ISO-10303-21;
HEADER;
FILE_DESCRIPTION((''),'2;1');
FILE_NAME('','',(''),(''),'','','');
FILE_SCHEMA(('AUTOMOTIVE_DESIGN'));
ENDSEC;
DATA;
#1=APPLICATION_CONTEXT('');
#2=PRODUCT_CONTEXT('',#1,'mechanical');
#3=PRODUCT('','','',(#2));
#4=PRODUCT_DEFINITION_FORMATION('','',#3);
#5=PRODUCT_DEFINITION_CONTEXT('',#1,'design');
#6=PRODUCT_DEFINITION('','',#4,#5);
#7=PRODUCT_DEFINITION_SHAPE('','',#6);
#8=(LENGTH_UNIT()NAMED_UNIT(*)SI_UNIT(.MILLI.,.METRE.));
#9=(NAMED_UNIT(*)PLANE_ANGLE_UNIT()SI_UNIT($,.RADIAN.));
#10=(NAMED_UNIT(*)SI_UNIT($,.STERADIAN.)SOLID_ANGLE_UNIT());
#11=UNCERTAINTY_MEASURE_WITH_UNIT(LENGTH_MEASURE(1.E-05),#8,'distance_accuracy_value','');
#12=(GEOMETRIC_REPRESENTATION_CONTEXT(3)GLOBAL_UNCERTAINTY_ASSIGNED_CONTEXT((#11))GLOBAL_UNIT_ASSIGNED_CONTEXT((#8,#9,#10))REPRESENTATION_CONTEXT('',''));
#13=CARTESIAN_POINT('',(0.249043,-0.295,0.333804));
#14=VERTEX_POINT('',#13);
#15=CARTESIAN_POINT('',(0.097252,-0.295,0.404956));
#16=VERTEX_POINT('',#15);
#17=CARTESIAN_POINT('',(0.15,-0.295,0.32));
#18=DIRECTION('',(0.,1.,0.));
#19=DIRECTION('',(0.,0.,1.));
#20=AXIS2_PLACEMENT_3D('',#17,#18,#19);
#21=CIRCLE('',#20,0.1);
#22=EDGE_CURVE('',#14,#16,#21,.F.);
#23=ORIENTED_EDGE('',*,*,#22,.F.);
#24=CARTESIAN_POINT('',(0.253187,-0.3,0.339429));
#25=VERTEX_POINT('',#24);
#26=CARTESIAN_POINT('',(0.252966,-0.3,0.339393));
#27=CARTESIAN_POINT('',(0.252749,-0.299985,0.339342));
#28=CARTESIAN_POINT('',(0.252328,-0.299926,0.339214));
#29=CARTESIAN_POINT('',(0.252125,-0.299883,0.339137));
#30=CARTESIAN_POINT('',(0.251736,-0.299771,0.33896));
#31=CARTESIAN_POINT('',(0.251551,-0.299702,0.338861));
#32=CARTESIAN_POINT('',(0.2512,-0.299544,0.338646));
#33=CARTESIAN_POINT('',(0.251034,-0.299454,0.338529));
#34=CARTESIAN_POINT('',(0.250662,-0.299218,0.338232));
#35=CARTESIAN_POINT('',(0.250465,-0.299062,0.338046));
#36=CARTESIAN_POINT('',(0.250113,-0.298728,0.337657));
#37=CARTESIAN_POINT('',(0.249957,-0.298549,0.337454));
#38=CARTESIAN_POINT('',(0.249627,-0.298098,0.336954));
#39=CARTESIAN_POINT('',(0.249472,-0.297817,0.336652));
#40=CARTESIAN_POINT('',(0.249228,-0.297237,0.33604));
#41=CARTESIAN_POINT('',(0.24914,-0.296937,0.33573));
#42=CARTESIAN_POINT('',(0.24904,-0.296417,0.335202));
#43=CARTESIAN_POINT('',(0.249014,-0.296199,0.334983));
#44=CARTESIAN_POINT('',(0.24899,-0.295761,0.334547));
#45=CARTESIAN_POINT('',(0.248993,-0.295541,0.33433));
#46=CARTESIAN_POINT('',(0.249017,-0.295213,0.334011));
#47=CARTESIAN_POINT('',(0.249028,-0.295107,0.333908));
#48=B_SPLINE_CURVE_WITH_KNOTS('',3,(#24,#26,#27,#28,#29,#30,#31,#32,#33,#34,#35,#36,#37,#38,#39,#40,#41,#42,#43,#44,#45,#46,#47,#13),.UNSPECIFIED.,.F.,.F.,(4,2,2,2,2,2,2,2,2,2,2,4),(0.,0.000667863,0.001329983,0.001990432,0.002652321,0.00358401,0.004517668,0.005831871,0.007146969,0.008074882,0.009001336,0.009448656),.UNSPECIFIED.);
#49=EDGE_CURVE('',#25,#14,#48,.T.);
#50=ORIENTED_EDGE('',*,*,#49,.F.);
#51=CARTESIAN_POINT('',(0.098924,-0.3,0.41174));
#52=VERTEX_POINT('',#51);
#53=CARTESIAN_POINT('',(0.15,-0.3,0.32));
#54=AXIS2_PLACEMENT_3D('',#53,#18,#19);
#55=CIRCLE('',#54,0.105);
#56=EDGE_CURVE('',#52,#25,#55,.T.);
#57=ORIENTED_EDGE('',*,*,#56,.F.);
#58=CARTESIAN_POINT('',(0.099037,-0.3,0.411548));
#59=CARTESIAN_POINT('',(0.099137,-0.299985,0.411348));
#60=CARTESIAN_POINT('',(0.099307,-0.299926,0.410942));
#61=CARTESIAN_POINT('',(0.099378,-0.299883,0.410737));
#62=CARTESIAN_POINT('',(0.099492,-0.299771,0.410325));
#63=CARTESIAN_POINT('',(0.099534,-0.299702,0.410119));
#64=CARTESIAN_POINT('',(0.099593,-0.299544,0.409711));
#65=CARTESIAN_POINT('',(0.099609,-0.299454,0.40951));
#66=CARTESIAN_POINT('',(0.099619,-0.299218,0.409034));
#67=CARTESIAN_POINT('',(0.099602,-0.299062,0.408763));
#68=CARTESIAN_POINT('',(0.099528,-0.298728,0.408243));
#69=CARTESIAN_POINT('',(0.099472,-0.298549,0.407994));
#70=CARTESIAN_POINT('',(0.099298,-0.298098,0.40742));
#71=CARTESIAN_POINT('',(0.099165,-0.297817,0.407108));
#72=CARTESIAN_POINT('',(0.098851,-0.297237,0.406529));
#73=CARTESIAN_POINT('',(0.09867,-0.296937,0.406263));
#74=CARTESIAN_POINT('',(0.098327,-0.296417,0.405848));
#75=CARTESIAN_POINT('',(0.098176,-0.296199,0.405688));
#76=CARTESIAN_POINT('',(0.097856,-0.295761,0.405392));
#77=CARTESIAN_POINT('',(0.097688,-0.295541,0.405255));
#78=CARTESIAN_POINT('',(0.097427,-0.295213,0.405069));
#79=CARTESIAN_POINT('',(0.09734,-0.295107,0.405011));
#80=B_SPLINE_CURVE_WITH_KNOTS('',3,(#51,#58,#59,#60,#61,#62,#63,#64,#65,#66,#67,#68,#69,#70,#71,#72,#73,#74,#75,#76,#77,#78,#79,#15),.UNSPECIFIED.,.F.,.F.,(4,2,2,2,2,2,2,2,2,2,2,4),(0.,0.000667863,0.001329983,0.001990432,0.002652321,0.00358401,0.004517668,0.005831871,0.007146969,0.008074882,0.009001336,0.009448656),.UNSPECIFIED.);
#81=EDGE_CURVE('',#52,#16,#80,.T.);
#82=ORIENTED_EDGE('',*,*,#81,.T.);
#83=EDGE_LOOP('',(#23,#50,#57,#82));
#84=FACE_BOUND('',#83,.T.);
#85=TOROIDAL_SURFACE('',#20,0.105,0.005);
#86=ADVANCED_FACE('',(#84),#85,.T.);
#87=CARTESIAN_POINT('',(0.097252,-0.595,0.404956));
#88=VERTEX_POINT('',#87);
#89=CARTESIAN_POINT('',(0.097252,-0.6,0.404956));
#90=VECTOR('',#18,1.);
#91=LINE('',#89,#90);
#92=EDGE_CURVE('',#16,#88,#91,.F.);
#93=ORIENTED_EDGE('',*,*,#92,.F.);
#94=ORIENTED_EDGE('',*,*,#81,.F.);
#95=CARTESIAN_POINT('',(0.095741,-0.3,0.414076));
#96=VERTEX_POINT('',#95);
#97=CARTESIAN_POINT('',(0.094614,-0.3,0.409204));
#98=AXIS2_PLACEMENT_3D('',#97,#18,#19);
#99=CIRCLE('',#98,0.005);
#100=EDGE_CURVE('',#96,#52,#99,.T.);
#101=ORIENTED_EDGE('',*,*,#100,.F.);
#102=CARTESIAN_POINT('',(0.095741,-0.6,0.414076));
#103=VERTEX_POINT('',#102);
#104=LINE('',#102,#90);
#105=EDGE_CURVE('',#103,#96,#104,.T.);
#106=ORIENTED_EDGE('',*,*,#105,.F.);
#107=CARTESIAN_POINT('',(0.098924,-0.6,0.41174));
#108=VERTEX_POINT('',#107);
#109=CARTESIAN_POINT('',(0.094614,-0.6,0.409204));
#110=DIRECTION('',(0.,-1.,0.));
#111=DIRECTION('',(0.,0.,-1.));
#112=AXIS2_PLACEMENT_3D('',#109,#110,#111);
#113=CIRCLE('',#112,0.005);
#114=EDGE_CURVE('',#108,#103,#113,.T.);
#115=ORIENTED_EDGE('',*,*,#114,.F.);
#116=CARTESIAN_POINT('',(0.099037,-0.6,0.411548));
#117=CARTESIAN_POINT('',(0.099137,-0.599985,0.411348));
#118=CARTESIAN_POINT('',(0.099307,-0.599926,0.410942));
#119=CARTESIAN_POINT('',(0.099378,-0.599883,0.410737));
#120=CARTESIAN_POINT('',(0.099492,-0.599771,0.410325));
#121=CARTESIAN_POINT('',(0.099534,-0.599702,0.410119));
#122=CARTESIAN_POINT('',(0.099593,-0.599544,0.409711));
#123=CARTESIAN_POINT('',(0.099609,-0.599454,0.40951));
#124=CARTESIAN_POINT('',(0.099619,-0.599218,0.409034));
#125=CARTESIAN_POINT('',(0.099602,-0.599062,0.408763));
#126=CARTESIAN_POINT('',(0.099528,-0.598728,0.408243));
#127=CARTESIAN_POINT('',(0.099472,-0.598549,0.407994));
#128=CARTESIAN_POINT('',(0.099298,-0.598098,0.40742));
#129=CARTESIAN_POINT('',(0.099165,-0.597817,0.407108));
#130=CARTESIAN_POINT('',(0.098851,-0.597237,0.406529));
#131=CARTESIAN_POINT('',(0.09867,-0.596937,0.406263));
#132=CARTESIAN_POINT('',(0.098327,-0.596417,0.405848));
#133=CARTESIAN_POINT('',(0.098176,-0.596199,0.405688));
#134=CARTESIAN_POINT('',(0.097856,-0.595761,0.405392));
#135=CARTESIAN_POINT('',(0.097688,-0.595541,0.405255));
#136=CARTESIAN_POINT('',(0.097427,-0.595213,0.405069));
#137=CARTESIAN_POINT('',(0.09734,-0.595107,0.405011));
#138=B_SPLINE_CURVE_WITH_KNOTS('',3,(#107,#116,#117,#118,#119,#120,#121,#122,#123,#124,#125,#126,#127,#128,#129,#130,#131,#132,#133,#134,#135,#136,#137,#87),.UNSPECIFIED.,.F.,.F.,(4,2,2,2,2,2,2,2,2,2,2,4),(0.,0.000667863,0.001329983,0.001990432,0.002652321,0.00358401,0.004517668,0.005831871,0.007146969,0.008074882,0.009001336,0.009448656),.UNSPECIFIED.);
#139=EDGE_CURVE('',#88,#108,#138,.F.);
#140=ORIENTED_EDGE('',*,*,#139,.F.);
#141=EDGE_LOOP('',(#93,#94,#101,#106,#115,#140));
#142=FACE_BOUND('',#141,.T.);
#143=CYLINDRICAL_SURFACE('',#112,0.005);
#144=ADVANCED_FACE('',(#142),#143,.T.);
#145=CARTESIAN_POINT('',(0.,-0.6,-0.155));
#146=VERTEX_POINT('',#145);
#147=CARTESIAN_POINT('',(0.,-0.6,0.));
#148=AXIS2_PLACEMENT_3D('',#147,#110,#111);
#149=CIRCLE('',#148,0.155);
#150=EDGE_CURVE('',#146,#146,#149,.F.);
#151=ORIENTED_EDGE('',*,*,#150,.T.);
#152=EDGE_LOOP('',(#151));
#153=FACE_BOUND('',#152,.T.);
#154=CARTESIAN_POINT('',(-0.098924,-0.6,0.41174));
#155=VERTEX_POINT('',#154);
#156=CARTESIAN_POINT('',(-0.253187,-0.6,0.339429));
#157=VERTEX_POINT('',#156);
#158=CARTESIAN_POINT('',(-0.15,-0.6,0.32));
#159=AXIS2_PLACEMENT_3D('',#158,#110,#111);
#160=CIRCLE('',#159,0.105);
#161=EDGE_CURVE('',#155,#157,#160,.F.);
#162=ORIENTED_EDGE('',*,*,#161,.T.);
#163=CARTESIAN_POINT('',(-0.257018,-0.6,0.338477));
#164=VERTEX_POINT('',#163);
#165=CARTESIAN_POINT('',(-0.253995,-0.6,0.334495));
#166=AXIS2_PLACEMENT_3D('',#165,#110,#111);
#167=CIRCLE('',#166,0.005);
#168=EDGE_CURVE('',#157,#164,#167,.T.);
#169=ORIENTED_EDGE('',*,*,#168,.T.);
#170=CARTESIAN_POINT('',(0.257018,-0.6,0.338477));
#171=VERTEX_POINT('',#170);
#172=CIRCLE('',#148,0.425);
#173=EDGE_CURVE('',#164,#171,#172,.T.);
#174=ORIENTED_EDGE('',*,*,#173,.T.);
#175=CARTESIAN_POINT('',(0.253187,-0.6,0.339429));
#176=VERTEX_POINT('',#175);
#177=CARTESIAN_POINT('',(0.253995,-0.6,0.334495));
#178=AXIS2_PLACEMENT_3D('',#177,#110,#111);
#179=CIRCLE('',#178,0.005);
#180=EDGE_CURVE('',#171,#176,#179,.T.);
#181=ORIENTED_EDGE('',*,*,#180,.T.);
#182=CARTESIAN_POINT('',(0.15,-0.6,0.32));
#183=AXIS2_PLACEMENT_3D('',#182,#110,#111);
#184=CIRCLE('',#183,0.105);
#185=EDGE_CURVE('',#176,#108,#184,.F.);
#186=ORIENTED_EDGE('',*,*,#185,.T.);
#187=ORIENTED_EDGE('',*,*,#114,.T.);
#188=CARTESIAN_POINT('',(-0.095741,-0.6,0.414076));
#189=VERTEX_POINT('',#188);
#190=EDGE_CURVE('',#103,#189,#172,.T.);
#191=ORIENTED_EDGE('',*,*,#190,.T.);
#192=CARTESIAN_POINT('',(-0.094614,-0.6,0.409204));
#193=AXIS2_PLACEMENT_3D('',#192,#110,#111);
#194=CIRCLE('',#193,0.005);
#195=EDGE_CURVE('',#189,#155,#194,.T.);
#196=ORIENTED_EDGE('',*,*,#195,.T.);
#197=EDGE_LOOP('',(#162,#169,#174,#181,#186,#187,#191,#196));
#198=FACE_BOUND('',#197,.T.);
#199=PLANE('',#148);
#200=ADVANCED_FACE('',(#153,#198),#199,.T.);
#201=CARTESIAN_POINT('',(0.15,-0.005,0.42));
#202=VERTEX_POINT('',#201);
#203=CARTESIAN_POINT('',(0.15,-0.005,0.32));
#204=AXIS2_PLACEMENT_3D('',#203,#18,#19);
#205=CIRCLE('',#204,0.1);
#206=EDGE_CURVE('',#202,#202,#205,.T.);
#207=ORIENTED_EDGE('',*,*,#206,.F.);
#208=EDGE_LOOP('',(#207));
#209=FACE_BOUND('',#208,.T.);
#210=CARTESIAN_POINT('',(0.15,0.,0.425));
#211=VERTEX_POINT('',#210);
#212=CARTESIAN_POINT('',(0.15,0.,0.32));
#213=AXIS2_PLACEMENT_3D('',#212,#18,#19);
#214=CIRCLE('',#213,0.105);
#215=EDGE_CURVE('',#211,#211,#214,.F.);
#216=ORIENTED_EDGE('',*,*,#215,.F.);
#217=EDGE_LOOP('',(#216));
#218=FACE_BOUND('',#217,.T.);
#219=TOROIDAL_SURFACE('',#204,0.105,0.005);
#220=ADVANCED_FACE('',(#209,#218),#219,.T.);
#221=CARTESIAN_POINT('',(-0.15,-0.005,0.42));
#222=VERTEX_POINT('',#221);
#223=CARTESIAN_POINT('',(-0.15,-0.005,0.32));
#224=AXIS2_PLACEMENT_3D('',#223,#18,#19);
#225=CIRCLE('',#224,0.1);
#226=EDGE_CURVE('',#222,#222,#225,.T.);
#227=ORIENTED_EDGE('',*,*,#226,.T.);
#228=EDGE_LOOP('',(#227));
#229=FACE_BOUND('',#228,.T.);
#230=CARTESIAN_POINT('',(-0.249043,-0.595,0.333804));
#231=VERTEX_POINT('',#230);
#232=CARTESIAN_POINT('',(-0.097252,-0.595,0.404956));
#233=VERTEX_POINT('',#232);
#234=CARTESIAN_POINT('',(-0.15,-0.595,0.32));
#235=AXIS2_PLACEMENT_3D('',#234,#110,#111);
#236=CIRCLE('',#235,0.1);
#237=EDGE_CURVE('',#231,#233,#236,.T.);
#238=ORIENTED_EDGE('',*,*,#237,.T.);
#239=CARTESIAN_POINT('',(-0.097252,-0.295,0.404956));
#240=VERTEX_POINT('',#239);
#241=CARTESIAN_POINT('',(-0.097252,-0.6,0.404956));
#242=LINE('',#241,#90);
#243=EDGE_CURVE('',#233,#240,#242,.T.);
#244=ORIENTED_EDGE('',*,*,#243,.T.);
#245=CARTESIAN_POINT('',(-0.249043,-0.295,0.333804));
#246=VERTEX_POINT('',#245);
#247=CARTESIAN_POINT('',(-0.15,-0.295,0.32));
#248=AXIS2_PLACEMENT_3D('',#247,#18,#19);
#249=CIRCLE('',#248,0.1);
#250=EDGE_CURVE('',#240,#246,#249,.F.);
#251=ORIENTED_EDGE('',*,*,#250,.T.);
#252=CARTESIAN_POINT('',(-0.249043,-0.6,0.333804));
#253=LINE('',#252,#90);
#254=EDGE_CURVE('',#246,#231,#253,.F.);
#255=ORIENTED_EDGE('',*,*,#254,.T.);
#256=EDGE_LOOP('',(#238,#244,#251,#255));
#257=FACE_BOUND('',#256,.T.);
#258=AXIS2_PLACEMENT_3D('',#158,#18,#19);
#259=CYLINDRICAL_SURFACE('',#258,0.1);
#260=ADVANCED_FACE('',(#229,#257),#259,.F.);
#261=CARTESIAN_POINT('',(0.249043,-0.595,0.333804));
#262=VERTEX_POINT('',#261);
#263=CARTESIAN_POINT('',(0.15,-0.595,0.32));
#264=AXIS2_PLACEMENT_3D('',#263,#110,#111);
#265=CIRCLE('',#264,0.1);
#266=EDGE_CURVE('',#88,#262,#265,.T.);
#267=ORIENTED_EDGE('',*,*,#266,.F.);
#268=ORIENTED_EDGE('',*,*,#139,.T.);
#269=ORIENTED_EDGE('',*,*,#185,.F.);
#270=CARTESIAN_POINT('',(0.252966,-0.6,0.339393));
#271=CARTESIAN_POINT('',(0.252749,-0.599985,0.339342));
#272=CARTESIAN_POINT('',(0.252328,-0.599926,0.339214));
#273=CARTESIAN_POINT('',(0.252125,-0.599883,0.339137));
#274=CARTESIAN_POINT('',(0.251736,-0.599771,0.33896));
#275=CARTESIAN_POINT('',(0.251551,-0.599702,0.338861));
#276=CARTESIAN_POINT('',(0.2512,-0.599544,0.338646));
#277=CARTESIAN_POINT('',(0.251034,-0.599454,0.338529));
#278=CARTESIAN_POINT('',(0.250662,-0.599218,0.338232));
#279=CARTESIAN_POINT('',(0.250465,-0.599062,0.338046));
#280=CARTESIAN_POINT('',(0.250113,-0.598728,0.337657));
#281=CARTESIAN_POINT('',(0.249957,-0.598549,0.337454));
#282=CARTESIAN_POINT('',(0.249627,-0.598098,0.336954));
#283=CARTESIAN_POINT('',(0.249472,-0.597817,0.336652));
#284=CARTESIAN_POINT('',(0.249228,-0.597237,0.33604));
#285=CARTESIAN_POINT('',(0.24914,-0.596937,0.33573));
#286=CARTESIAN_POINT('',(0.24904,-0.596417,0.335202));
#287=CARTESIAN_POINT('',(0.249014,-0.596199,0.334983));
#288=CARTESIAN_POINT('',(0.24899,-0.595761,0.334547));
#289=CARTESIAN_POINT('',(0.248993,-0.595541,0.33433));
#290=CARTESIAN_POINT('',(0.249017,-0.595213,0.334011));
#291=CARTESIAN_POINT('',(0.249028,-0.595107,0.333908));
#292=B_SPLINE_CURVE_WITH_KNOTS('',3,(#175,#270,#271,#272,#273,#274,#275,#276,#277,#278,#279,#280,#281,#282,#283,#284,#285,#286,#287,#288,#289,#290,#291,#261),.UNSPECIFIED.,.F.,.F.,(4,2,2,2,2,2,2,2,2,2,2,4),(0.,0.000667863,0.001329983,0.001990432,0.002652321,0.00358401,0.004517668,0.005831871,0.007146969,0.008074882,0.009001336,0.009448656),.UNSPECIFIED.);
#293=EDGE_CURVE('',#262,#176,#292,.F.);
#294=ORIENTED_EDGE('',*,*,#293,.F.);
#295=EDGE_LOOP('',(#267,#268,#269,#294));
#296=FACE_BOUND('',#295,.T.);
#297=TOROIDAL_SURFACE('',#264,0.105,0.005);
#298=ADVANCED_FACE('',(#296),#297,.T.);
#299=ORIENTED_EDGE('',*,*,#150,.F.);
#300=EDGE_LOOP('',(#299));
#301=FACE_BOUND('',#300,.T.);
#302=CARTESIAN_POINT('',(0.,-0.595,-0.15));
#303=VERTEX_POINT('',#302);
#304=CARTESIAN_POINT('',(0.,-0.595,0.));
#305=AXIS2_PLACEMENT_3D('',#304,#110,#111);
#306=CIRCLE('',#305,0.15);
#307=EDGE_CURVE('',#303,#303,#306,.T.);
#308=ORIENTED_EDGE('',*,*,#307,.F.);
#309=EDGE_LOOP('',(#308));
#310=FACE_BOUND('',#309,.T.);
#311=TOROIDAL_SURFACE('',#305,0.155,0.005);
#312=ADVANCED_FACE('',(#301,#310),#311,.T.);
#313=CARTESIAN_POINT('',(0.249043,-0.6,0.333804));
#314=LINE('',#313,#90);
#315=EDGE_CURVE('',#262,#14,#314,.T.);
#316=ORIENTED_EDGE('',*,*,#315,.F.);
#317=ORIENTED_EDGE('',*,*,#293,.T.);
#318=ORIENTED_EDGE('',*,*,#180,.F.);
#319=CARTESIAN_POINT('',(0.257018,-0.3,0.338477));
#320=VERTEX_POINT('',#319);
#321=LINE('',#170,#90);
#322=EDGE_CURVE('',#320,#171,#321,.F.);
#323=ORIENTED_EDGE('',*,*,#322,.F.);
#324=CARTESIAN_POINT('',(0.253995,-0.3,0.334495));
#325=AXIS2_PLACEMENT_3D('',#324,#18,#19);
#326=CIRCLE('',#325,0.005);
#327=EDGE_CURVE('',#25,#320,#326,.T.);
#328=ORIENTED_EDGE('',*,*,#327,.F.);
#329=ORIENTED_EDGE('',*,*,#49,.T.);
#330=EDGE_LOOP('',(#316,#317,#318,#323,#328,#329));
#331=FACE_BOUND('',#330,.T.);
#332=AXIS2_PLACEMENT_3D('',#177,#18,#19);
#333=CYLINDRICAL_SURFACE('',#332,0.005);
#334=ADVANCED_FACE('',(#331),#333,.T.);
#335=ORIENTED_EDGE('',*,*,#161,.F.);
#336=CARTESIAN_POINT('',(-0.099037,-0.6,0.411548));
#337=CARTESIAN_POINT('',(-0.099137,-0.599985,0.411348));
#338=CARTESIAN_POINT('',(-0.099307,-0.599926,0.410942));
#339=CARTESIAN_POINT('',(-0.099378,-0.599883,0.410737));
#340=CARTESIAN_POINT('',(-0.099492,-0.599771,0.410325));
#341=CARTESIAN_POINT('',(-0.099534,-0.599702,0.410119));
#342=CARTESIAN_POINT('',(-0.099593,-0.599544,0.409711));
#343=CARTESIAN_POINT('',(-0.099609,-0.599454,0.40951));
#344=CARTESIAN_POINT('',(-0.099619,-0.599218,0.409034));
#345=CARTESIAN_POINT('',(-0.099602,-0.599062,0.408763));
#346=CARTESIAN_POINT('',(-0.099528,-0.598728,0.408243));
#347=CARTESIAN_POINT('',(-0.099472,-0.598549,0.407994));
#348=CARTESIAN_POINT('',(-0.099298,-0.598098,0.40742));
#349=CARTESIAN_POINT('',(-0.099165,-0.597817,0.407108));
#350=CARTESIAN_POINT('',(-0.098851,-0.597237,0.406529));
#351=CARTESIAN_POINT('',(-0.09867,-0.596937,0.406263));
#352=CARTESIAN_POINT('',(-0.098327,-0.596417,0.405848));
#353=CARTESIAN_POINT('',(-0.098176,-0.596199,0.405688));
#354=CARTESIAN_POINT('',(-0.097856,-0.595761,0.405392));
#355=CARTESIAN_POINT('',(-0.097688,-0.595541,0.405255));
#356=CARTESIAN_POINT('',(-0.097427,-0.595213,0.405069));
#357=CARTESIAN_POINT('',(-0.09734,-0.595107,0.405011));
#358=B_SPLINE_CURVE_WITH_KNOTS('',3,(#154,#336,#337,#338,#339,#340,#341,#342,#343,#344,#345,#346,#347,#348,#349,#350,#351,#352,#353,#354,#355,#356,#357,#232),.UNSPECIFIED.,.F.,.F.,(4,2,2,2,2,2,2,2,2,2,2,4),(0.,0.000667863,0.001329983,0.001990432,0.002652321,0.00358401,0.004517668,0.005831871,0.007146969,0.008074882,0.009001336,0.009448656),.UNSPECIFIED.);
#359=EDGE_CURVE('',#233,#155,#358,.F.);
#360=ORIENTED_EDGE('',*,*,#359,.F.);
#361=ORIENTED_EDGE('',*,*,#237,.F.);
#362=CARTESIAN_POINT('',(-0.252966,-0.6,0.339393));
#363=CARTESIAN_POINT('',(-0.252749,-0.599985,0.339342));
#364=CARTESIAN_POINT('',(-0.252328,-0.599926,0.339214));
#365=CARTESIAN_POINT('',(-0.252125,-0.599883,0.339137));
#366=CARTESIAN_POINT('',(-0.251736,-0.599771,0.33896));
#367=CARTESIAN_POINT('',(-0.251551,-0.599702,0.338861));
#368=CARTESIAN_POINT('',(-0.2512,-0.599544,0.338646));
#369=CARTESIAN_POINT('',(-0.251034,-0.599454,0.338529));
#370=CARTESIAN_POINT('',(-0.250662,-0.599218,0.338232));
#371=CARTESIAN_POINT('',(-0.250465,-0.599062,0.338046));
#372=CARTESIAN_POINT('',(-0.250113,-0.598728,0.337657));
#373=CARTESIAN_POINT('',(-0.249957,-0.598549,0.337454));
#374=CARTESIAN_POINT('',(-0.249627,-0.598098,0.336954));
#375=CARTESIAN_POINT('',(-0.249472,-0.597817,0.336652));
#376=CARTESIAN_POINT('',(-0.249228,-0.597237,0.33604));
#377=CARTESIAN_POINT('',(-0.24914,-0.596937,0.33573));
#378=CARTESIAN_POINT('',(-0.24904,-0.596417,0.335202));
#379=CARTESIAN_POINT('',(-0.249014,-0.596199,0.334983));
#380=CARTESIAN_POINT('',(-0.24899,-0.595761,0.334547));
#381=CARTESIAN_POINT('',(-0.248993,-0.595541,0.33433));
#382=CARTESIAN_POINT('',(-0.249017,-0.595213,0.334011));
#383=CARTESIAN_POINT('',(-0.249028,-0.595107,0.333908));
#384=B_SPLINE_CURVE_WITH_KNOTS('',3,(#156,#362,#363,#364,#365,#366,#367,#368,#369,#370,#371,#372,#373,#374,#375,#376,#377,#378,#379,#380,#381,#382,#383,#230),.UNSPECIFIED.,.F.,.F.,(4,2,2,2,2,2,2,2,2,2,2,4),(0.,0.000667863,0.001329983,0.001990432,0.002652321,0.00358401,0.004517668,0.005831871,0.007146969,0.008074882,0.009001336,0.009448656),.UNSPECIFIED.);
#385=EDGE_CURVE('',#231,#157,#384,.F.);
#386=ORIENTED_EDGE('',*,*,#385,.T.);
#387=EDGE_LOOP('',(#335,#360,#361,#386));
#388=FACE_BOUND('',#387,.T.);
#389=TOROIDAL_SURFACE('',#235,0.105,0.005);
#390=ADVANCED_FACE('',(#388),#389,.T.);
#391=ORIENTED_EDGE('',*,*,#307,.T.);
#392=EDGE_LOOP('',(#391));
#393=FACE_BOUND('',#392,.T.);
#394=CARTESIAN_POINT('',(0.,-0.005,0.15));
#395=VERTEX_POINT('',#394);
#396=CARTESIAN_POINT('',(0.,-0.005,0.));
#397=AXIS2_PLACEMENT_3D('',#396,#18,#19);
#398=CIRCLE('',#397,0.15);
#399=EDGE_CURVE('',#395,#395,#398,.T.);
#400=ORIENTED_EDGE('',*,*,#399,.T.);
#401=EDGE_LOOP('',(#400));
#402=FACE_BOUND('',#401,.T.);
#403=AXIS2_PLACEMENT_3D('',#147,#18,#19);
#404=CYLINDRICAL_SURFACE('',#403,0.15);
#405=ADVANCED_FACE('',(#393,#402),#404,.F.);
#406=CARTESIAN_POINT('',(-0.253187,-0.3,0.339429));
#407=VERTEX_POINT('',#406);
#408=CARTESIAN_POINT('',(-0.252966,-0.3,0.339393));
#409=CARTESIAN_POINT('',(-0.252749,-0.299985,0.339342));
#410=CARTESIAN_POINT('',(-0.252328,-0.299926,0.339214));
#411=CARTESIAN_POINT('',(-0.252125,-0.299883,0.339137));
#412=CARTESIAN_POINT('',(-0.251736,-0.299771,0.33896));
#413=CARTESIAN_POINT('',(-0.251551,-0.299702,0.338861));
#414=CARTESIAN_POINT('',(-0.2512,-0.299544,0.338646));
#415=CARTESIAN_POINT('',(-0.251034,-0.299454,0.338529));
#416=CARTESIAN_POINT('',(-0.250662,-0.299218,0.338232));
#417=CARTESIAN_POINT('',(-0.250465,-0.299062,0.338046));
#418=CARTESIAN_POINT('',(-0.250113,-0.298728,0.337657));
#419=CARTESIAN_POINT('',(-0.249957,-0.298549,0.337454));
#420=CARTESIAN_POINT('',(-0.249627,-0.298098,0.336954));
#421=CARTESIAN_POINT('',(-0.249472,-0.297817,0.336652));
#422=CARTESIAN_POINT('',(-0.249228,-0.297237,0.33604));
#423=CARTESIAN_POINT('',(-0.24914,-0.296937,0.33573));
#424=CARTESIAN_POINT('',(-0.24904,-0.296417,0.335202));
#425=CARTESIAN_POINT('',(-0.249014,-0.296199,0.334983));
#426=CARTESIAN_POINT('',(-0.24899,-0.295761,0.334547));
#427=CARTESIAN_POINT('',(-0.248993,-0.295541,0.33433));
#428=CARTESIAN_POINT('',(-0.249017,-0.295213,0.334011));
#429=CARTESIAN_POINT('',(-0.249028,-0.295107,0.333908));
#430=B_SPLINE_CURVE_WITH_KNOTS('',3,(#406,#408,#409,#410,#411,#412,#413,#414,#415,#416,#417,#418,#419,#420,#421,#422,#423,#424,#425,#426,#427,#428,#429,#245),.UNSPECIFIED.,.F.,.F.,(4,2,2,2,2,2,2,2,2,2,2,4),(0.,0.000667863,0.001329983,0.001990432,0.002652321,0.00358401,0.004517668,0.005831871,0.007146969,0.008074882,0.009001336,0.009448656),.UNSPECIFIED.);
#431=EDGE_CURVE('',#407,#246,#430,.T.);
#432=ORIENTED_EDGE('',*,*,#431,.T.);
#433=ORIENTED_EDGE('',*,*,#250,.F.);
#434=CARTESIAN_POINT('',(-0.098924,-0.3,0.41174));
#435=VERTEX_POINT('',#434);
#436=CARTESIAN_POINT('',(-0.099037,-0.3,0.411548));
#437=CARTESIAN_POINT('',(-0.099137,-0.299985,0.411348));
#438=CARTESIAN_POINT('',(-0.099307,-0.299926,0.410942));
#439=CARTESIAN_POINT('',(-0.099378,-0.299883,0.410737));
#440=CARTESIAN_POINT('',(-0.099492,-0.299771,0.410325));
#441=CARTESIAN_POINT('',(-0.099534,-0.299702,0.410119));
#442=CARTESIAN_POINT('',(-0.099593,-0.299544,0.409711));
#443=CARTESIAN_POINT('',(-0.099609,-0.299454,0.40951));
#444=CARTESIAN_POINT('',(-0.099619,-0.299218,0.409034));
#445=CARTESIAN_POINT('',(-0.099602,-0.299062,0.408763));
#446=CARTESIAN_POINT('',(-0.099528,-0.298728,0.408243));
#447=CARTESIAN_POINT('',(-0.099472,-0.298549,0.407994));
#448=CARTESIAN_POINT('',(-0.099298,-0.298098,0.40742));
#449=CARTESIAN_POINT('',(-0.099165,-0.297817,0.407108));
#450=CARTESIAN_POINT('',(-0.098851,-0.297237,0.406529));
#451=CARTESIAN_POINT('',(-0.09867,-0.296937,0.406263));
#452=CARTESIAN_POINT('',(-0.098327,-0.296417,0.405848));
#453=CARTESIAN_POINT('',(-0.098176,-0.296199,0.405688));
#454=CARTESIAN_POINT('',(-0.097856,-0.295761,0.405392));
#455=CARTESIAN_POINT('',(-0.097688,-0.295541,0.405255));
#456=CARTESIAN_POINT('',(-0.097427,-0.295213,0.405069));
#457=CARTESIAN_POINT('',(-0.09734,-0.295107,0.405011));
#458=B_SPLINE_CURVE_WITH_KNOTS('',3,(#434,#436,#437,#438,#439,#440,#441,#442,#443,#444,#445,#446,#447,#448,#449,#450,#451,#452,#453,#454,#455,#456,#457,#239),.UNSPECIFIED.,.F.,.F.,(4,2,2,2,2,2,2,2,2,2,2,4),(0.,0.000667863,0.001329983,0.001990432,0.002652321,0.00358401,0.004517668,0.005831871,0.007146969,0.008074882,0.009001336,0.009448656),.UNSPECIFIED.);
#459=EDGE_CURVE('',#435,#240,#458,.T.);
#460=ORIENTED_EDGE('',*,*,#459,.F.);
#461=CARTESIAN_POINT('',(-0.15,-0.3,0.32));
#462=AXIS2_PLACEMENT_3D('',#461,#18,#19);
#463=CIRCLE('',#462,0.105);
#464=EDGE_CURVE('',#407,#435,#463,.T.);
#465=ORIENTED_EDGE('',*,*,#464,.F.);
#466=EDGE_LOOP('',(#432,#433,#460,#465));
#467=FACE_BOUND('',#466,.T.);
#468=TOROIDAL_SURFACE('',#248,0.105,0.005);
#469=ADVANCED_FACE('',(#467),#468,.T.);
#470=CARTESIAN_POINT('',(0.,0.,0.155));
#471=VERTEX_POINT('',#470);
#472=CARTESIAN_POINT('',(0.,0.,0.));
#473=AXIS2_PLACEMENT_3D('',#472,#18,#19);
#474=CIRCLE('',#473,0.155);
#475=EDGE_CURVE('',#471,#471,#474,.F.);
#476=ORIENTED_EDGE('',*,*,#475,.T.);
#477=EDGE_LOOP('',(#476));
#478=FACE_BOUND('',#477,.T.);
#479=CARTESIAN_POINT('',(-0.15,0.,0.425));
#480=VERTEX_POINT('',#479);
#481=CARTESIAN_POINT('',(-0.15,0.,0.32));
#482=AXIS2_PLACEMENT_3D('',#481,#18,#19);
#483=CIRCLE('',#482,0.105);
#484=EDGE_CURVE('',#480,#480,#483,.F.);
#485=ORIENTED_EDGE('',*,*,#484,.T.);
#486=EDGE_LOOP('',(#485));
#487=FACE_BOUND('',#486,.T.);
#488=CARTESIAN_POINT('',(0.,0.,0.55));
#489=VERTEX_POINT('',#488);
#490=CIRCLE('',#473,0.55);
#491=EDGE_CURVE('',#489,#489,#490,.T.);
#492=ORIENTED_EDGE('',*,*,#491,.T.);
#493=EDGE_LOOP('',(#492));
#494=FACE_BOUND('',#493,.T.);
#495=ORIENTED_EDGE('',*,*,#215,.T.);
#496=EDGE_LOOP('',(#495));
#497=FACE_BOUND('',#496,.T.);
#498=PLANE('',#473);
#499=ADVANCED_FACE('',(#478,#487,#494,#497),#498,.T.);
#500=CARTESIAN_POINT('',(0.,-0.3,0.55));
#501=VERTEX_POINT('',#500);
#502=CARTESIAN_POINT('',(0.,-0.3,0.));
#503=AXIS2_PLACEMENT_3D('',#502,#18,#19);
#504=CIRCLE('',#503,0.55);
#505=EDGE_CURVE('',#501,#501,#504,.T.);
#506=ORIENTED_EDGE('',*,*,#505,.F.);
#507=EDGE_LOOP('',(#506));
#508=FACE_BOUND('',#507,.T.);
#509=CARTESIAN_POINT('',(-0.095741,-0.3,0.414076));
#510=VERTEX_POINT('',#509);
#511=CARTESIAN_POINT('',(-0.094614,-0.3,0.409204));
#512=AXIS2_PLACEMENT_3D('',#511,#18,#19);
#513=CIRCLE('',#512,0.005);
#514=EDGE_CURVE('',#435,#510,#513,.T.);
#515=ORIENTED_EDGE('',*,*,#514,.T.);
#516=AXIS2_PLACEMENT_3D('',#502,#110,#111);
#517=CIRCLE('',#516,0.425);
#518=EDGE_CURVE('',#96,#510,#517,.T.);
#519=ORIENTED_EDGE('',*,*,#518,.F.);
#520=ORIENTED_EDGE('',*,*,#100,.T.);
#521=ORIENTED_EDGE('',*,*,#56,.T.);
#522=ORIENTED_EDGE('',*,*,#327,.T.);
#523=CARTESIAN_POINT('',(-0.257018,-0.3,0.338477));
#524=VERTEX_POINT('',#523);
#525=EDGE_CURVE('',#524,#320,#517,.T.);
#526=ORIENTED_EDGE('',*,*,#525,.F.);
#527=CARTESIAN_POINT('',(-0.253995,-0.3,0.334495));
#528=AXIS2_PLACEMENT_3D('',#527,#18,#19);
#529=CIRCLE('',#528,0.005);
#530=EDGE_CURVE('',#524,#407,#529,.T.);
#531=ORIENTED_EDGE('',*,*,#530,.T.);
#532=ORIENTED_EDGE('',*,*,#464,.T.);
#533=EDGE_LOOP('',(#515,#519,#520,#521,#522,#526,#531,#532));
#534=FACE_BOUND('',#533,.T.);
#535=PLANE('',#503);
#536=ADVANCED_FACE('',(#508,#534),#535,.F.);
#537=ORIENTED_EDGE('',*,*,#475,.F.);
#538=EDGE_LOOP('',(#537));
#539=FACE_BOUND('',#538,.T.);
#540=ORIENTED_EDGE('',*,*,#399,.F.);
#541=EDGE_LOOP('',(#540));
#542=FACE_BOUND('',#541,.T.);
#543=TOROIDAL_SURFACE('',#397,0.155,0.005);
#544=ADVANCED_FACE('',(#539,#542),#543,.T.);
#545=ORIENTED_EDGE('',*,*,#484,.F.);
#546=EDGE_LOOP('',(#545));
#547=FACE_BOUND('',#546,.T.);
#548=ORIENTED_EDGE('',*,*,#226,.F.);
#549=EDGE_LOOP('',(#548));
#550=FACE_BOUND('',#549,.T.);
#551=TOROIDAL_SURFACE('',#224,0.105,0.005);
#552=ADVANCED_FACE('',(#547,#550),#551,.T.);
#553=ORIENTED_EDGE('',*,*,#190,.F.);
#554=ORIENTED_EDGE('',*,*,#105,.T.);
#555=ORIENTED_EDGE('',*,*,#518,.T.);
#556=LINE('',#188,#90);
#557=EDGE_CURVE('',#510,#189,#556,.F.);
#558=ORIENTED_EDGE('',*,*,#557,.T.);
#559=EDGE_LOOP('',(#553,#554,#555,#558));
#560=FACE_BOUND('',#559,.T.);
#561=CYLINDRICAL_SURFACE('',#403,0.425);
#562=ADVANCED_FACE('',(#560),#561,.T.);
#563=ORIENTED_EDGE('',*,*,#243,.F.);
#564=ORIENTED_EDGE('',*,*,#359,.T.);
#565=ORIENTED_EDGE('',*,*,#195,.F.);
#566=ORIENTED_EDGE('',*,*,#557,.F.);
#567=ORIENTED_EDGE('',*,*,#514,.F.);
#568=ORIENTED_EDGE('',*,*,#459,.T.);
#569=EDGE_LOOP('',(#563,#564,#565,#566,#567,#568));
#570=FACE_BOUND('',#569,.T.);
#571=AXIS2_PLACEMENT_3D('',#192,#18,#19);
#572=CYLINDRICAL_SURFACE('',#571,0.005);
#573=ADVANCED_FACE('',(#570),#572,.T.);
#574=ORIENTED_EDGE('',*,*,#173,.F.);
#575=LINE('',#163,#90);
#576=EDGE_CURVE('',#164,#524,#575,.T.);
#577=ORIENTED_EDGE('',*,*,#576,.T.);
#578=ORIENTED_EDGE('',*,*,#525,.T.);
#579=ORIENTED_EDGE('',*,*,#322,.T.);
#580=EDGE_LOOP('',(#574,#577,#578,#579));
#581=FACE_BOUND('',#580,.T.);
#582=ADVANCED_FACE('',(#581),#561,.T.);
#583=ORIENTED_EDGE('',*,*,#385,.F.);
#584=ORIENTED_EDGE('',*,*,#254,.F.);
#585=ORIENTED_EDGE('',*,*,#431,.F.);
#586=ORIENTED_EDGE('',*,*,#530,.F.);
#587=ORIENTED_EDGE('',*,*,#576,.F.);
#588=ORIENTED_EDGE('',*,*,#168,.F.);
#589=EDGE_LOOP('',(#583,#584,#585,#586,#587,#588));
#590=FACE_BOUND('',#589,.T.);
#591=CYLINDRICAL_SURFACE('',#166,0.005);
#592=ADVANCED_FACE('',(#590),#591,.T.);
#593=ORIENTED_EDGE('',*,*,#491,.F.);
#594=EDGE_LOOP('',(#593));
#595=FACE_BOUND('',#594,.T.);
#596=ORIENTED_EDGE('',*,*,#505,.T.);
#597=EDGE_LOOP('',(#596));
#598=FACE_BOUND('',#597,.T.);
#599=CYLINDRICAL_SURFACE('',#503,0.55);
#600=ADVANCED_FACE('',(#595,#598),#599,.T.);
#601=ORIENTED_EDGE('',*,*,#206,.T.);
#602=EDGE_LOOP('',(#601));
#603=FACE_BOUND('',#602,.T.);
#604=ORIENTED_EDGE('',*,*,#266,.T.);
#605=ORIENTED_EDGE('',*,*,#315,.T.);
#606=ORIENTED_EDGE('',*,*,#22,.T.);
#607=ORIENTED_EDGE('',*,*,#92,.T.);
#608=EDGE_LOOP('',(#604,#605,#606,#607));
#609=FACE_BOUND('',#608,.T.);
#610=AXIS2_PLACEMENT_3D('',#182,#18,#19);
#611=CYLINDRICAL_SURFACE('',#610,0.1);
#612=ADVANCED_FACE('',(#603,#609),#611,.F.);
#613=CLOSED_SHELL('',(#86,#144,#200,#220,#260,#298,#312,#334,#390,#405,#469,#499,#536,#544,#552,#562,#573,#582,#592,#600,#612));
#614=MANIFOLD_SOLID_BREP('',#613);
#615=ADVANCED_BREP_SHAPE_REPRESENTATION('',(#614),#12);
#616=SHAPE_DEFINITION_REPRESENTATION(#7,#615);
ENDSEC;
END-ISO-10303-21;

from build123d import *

# Parameters (mm, degrees)
SKETCH1_R           = 0.55
BOSS_EXTRUDE1_DEPTH = 0.3
SKETCH2_R           = 0.425
BOSS_EXTRUDE2_DEPTH = 0.3
SKETCH3_R           = 0.15
SKETCH3_R_2         = 0.1
CUT_EXTRUDE1_DEPTH  = 1.982344135
FILLET5_R           = 0.005


with BuildPart() as part:
    # Sketch1 → Boss-Extrude1 (new body)
    with BuildSketch(Plane(origin=(0, 0, 0), x_dir=(1, 0, 0), z_dir=(0, 1, 0))):
        Circle(SKETCH1_R)
    extrude(amount=-BOSS_EXTRUDE1_DEPTH)

    # Sketch2 → Boss-Extrude2 (add)
    with BuildSketch(Plane.XZ.offset(0.3)):
        Circle(SKETCH2_R)
    extrude(amount=BOSS_EXTRUDE2_DEPTH)

    # Sketch3 → Cut-Extrude1 (cut, through all)
    with BuildSketch(Plane(origin=(0, 0, 0), x_dir=(1, 0, 0), z_dir=(0, 1, 0))):
        Circle(SKETCH3_R)
        with Locations((0.15, -0.32)):
            Circle(SKETCH3_R_2)
        with Locations((-0.15, -0.32)):
            Circle(SKETCH3_R_2)
    extrude(amount=-CUT_EXTRUDE1_DEPTH, mode=Mode.SUBTRACT)

    # Fillet5
    fillet5_edges = [part.edges().sort_by_distance(p)[0] for p in [
        (-0.15, 0, 0),
        (-0.15, -0.6, 0),
        (0.05, 0, 0.32),
        (0.095958554, -0.6, 0.235860104),
        (-0.25, 0, 0.32),
        (-0.163220488, -0.6, 0.220877759),
        (0.246504374, -0.45, 0.346208887),
        (0.108409557, -0.45, 0.410940833),
        (0.192443388, -0.3, 0.410545894),
        (-0.108409557, -0.45, 0.410940833),
        (-0.246504374, -0.45, 0.346208887),
        (-0.192443388, -0.3, 0.410545894),
    ]]
    fillet(fillet5_edges, radius=FILLET5_R)


solid = part.part
